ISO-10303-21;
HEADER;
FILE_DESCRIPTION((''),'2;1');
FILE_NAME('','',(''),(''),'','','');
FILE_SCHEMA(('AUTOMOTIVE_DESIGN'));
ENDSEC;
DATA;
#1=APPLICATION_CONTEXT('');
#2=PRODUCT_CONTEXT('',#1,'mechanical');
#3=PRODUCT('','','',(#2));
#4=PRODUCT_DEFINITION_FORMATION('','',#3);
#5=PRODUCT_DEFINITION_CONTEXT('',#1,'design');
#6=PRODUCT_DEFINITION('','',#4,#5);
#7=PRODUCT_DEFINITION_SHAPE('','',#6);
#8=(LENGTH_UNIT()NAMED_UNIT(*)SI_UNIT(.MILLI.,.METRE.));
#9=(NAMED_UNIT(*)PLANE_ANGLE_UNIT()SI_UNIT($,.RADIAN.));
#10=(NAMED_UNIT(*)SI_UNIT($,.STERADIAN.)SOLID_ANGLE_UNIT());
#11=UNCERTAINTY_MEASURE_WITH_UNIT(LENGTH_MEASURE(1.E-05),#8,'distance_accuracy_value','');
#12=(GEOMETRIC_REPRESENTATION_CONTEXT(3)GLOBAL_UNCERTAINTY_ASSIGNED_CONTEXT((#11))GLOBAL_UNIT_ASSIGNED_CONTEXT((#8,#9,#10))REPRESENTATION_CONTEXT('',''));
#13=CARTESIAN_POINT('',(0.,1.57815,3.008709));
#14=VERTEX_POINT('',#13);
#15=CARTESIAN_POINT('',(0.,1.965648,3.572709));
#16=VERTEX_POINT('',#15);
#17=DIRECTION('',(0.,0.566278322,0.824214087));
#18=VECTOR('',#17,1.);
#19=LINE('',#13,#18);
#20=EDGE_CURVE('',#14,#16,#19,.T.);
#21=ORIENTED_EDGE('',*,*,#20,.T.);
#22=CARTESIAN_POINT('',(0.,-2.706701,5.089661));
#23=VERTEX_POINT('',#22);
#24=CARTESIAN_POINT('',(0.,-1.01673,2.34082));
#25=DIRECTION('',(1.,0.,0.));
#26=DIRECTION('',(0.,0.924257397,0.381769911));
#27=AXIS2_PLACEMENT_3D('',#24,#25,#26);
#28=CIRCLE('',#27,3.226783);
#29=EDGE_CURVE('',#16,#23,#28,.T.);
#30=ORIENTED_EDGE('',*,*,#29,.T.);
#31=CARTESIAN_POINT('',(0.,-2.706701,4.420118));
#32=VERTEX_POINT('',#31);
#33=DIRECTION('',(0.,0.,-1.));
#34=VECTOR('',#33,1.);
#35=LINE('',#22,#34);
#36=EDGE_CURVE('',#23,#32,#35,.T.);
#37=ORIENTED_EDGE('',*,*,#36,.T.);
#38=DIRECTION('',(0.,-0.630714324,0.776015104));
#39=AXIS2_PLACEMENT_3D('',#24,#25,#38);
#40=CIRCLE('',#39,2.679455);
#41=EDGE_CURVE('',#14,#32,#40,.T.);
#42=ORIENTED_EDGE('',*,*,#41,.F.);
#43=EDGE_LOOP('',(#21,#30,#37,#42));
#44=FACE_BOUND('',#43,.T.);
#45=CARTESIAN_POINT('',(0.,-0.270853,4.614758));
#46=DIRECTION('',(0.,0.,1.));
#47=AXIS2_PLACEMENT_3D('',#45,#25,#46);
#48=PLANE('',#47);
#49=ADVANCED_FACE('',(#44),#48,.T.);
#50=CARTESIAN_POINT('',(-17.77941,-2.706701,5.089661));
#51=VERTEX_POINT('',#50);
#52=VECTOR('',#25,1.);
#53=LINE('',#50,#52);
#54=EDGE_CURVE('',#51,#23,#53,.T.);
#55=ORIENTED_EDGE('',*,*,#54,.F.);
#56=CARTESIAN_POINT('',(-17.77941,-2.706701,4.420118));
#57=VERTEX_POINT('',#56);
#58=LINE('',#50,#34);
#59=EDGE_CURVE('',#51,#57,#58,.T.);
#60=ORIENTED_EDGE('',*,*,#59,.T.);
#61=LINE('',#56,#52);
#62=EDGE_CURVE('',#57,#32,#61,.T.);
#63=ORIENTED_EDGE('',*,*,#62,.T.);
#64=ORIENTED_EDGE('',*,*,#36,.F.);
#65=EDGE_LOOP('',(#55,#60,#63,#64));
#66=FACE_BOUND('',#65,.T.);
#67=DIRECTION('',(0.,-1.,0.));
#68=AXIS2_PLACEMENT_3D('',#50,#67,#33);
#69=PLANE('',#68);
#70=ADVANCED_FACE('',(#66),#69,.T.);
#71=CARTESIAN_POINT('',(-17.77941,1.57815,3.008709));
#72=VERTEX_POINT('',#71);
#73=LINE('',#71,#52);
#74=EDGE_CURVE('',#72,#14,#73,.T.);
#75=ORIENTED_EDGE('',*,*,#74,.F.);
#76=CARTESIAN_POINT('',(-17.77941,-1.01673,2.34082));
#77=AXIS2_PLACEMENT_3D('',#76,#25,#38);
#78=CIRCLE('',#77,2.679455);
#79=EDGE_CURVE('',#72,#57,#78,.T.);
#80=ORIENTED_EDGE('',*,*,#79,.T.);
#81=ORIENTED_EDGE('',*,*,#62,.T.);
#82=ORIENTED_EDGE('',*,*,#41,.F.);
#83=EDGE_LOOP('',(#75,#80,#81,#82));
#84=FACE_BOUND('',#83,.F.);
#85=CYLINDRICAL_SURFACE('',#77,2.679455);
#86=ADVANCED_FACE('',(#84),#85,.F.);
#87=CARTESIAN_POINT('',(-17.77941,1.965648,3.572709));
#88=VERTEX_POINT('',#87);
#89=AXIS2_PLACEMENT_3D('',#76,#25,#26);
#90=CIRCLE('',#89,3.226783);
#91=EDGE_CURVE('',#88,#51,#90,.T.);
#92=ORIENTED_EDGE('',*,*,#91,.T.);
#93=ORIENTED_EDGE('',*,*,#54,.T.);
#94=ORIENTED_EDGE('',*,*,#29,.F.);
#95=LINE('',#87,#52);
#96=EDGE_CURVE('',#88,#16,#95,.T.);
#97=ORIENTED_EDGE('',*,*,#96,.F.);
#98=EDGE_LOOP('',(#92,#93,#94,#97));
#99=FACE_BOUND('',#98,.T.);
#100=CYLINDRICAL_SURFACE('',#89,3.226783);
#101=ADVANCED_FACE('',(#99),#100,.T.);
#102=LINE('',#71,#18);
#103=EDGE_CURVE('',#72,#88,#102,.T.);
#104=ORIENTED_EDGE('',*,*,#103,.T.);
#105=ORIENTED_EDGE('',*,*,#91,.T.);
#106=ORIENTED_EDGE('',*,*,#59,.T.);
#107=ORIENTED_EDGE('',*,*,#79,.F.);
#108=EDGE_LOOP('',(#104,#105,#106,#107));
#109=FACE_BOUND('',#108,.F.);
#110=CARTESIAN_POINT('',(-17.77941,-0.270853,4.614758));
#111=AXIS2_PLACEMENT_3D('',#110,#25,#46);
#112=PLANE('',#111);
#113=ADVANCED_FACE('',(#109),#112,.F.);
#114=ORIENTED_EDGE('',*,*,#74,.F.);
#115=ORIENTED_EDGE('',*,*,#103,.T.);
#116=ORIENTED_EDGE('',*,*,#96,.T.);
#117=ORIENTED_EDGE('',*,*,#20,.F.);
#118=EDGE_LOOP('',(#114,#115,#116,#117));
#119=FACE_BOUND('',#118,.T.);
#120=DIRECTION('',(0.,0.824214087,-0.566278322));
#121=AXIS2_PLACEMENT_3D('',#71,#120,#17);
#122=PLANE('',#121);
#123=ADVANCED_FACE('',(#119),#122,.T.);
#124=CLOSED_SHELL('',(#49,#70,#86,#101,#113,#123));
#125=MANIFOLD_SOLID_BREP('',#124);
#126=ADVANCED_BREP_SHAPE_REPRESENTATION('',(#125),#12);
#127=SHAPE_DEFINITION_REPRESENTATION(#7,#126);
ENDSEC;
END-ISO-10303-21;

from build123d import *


# Not quite as in the source:
# - a feature names something its author has since deleted; it is built from what else it names


with BuildPart() as f2:
    # F2: sweep along a path in F0
    with BuildLine(Plane.XZ) as f2_path:
        Line((-25.6183743477, 3.866331419), (-7.8389644623, 3.866331419))
    # F1 (on Right) → F2 (sweep)
    with BuildSketch(Plane.YZ):
        with BuildLine():
            Line((1.5781502627, 3.0087089686), (1.9656477529, 3.5727088214))
            ThreePointArc((1.9656477529, 3.5727088214), (-0.020304079, 5.4099020075), (-2.7067011688, 5.0896612265))
            Line((-2.7067011688, 5.0896612265), (-2.7067011688, 4.4201179408))
            ThreePointArc((-2.7067011688, 4.4201179408), (-0.1784378749, 4.8857654381), (1.5781502627, 3.0087089686))
        make_face()
    sweep(path=f2_path.line)


solid = f2.part
